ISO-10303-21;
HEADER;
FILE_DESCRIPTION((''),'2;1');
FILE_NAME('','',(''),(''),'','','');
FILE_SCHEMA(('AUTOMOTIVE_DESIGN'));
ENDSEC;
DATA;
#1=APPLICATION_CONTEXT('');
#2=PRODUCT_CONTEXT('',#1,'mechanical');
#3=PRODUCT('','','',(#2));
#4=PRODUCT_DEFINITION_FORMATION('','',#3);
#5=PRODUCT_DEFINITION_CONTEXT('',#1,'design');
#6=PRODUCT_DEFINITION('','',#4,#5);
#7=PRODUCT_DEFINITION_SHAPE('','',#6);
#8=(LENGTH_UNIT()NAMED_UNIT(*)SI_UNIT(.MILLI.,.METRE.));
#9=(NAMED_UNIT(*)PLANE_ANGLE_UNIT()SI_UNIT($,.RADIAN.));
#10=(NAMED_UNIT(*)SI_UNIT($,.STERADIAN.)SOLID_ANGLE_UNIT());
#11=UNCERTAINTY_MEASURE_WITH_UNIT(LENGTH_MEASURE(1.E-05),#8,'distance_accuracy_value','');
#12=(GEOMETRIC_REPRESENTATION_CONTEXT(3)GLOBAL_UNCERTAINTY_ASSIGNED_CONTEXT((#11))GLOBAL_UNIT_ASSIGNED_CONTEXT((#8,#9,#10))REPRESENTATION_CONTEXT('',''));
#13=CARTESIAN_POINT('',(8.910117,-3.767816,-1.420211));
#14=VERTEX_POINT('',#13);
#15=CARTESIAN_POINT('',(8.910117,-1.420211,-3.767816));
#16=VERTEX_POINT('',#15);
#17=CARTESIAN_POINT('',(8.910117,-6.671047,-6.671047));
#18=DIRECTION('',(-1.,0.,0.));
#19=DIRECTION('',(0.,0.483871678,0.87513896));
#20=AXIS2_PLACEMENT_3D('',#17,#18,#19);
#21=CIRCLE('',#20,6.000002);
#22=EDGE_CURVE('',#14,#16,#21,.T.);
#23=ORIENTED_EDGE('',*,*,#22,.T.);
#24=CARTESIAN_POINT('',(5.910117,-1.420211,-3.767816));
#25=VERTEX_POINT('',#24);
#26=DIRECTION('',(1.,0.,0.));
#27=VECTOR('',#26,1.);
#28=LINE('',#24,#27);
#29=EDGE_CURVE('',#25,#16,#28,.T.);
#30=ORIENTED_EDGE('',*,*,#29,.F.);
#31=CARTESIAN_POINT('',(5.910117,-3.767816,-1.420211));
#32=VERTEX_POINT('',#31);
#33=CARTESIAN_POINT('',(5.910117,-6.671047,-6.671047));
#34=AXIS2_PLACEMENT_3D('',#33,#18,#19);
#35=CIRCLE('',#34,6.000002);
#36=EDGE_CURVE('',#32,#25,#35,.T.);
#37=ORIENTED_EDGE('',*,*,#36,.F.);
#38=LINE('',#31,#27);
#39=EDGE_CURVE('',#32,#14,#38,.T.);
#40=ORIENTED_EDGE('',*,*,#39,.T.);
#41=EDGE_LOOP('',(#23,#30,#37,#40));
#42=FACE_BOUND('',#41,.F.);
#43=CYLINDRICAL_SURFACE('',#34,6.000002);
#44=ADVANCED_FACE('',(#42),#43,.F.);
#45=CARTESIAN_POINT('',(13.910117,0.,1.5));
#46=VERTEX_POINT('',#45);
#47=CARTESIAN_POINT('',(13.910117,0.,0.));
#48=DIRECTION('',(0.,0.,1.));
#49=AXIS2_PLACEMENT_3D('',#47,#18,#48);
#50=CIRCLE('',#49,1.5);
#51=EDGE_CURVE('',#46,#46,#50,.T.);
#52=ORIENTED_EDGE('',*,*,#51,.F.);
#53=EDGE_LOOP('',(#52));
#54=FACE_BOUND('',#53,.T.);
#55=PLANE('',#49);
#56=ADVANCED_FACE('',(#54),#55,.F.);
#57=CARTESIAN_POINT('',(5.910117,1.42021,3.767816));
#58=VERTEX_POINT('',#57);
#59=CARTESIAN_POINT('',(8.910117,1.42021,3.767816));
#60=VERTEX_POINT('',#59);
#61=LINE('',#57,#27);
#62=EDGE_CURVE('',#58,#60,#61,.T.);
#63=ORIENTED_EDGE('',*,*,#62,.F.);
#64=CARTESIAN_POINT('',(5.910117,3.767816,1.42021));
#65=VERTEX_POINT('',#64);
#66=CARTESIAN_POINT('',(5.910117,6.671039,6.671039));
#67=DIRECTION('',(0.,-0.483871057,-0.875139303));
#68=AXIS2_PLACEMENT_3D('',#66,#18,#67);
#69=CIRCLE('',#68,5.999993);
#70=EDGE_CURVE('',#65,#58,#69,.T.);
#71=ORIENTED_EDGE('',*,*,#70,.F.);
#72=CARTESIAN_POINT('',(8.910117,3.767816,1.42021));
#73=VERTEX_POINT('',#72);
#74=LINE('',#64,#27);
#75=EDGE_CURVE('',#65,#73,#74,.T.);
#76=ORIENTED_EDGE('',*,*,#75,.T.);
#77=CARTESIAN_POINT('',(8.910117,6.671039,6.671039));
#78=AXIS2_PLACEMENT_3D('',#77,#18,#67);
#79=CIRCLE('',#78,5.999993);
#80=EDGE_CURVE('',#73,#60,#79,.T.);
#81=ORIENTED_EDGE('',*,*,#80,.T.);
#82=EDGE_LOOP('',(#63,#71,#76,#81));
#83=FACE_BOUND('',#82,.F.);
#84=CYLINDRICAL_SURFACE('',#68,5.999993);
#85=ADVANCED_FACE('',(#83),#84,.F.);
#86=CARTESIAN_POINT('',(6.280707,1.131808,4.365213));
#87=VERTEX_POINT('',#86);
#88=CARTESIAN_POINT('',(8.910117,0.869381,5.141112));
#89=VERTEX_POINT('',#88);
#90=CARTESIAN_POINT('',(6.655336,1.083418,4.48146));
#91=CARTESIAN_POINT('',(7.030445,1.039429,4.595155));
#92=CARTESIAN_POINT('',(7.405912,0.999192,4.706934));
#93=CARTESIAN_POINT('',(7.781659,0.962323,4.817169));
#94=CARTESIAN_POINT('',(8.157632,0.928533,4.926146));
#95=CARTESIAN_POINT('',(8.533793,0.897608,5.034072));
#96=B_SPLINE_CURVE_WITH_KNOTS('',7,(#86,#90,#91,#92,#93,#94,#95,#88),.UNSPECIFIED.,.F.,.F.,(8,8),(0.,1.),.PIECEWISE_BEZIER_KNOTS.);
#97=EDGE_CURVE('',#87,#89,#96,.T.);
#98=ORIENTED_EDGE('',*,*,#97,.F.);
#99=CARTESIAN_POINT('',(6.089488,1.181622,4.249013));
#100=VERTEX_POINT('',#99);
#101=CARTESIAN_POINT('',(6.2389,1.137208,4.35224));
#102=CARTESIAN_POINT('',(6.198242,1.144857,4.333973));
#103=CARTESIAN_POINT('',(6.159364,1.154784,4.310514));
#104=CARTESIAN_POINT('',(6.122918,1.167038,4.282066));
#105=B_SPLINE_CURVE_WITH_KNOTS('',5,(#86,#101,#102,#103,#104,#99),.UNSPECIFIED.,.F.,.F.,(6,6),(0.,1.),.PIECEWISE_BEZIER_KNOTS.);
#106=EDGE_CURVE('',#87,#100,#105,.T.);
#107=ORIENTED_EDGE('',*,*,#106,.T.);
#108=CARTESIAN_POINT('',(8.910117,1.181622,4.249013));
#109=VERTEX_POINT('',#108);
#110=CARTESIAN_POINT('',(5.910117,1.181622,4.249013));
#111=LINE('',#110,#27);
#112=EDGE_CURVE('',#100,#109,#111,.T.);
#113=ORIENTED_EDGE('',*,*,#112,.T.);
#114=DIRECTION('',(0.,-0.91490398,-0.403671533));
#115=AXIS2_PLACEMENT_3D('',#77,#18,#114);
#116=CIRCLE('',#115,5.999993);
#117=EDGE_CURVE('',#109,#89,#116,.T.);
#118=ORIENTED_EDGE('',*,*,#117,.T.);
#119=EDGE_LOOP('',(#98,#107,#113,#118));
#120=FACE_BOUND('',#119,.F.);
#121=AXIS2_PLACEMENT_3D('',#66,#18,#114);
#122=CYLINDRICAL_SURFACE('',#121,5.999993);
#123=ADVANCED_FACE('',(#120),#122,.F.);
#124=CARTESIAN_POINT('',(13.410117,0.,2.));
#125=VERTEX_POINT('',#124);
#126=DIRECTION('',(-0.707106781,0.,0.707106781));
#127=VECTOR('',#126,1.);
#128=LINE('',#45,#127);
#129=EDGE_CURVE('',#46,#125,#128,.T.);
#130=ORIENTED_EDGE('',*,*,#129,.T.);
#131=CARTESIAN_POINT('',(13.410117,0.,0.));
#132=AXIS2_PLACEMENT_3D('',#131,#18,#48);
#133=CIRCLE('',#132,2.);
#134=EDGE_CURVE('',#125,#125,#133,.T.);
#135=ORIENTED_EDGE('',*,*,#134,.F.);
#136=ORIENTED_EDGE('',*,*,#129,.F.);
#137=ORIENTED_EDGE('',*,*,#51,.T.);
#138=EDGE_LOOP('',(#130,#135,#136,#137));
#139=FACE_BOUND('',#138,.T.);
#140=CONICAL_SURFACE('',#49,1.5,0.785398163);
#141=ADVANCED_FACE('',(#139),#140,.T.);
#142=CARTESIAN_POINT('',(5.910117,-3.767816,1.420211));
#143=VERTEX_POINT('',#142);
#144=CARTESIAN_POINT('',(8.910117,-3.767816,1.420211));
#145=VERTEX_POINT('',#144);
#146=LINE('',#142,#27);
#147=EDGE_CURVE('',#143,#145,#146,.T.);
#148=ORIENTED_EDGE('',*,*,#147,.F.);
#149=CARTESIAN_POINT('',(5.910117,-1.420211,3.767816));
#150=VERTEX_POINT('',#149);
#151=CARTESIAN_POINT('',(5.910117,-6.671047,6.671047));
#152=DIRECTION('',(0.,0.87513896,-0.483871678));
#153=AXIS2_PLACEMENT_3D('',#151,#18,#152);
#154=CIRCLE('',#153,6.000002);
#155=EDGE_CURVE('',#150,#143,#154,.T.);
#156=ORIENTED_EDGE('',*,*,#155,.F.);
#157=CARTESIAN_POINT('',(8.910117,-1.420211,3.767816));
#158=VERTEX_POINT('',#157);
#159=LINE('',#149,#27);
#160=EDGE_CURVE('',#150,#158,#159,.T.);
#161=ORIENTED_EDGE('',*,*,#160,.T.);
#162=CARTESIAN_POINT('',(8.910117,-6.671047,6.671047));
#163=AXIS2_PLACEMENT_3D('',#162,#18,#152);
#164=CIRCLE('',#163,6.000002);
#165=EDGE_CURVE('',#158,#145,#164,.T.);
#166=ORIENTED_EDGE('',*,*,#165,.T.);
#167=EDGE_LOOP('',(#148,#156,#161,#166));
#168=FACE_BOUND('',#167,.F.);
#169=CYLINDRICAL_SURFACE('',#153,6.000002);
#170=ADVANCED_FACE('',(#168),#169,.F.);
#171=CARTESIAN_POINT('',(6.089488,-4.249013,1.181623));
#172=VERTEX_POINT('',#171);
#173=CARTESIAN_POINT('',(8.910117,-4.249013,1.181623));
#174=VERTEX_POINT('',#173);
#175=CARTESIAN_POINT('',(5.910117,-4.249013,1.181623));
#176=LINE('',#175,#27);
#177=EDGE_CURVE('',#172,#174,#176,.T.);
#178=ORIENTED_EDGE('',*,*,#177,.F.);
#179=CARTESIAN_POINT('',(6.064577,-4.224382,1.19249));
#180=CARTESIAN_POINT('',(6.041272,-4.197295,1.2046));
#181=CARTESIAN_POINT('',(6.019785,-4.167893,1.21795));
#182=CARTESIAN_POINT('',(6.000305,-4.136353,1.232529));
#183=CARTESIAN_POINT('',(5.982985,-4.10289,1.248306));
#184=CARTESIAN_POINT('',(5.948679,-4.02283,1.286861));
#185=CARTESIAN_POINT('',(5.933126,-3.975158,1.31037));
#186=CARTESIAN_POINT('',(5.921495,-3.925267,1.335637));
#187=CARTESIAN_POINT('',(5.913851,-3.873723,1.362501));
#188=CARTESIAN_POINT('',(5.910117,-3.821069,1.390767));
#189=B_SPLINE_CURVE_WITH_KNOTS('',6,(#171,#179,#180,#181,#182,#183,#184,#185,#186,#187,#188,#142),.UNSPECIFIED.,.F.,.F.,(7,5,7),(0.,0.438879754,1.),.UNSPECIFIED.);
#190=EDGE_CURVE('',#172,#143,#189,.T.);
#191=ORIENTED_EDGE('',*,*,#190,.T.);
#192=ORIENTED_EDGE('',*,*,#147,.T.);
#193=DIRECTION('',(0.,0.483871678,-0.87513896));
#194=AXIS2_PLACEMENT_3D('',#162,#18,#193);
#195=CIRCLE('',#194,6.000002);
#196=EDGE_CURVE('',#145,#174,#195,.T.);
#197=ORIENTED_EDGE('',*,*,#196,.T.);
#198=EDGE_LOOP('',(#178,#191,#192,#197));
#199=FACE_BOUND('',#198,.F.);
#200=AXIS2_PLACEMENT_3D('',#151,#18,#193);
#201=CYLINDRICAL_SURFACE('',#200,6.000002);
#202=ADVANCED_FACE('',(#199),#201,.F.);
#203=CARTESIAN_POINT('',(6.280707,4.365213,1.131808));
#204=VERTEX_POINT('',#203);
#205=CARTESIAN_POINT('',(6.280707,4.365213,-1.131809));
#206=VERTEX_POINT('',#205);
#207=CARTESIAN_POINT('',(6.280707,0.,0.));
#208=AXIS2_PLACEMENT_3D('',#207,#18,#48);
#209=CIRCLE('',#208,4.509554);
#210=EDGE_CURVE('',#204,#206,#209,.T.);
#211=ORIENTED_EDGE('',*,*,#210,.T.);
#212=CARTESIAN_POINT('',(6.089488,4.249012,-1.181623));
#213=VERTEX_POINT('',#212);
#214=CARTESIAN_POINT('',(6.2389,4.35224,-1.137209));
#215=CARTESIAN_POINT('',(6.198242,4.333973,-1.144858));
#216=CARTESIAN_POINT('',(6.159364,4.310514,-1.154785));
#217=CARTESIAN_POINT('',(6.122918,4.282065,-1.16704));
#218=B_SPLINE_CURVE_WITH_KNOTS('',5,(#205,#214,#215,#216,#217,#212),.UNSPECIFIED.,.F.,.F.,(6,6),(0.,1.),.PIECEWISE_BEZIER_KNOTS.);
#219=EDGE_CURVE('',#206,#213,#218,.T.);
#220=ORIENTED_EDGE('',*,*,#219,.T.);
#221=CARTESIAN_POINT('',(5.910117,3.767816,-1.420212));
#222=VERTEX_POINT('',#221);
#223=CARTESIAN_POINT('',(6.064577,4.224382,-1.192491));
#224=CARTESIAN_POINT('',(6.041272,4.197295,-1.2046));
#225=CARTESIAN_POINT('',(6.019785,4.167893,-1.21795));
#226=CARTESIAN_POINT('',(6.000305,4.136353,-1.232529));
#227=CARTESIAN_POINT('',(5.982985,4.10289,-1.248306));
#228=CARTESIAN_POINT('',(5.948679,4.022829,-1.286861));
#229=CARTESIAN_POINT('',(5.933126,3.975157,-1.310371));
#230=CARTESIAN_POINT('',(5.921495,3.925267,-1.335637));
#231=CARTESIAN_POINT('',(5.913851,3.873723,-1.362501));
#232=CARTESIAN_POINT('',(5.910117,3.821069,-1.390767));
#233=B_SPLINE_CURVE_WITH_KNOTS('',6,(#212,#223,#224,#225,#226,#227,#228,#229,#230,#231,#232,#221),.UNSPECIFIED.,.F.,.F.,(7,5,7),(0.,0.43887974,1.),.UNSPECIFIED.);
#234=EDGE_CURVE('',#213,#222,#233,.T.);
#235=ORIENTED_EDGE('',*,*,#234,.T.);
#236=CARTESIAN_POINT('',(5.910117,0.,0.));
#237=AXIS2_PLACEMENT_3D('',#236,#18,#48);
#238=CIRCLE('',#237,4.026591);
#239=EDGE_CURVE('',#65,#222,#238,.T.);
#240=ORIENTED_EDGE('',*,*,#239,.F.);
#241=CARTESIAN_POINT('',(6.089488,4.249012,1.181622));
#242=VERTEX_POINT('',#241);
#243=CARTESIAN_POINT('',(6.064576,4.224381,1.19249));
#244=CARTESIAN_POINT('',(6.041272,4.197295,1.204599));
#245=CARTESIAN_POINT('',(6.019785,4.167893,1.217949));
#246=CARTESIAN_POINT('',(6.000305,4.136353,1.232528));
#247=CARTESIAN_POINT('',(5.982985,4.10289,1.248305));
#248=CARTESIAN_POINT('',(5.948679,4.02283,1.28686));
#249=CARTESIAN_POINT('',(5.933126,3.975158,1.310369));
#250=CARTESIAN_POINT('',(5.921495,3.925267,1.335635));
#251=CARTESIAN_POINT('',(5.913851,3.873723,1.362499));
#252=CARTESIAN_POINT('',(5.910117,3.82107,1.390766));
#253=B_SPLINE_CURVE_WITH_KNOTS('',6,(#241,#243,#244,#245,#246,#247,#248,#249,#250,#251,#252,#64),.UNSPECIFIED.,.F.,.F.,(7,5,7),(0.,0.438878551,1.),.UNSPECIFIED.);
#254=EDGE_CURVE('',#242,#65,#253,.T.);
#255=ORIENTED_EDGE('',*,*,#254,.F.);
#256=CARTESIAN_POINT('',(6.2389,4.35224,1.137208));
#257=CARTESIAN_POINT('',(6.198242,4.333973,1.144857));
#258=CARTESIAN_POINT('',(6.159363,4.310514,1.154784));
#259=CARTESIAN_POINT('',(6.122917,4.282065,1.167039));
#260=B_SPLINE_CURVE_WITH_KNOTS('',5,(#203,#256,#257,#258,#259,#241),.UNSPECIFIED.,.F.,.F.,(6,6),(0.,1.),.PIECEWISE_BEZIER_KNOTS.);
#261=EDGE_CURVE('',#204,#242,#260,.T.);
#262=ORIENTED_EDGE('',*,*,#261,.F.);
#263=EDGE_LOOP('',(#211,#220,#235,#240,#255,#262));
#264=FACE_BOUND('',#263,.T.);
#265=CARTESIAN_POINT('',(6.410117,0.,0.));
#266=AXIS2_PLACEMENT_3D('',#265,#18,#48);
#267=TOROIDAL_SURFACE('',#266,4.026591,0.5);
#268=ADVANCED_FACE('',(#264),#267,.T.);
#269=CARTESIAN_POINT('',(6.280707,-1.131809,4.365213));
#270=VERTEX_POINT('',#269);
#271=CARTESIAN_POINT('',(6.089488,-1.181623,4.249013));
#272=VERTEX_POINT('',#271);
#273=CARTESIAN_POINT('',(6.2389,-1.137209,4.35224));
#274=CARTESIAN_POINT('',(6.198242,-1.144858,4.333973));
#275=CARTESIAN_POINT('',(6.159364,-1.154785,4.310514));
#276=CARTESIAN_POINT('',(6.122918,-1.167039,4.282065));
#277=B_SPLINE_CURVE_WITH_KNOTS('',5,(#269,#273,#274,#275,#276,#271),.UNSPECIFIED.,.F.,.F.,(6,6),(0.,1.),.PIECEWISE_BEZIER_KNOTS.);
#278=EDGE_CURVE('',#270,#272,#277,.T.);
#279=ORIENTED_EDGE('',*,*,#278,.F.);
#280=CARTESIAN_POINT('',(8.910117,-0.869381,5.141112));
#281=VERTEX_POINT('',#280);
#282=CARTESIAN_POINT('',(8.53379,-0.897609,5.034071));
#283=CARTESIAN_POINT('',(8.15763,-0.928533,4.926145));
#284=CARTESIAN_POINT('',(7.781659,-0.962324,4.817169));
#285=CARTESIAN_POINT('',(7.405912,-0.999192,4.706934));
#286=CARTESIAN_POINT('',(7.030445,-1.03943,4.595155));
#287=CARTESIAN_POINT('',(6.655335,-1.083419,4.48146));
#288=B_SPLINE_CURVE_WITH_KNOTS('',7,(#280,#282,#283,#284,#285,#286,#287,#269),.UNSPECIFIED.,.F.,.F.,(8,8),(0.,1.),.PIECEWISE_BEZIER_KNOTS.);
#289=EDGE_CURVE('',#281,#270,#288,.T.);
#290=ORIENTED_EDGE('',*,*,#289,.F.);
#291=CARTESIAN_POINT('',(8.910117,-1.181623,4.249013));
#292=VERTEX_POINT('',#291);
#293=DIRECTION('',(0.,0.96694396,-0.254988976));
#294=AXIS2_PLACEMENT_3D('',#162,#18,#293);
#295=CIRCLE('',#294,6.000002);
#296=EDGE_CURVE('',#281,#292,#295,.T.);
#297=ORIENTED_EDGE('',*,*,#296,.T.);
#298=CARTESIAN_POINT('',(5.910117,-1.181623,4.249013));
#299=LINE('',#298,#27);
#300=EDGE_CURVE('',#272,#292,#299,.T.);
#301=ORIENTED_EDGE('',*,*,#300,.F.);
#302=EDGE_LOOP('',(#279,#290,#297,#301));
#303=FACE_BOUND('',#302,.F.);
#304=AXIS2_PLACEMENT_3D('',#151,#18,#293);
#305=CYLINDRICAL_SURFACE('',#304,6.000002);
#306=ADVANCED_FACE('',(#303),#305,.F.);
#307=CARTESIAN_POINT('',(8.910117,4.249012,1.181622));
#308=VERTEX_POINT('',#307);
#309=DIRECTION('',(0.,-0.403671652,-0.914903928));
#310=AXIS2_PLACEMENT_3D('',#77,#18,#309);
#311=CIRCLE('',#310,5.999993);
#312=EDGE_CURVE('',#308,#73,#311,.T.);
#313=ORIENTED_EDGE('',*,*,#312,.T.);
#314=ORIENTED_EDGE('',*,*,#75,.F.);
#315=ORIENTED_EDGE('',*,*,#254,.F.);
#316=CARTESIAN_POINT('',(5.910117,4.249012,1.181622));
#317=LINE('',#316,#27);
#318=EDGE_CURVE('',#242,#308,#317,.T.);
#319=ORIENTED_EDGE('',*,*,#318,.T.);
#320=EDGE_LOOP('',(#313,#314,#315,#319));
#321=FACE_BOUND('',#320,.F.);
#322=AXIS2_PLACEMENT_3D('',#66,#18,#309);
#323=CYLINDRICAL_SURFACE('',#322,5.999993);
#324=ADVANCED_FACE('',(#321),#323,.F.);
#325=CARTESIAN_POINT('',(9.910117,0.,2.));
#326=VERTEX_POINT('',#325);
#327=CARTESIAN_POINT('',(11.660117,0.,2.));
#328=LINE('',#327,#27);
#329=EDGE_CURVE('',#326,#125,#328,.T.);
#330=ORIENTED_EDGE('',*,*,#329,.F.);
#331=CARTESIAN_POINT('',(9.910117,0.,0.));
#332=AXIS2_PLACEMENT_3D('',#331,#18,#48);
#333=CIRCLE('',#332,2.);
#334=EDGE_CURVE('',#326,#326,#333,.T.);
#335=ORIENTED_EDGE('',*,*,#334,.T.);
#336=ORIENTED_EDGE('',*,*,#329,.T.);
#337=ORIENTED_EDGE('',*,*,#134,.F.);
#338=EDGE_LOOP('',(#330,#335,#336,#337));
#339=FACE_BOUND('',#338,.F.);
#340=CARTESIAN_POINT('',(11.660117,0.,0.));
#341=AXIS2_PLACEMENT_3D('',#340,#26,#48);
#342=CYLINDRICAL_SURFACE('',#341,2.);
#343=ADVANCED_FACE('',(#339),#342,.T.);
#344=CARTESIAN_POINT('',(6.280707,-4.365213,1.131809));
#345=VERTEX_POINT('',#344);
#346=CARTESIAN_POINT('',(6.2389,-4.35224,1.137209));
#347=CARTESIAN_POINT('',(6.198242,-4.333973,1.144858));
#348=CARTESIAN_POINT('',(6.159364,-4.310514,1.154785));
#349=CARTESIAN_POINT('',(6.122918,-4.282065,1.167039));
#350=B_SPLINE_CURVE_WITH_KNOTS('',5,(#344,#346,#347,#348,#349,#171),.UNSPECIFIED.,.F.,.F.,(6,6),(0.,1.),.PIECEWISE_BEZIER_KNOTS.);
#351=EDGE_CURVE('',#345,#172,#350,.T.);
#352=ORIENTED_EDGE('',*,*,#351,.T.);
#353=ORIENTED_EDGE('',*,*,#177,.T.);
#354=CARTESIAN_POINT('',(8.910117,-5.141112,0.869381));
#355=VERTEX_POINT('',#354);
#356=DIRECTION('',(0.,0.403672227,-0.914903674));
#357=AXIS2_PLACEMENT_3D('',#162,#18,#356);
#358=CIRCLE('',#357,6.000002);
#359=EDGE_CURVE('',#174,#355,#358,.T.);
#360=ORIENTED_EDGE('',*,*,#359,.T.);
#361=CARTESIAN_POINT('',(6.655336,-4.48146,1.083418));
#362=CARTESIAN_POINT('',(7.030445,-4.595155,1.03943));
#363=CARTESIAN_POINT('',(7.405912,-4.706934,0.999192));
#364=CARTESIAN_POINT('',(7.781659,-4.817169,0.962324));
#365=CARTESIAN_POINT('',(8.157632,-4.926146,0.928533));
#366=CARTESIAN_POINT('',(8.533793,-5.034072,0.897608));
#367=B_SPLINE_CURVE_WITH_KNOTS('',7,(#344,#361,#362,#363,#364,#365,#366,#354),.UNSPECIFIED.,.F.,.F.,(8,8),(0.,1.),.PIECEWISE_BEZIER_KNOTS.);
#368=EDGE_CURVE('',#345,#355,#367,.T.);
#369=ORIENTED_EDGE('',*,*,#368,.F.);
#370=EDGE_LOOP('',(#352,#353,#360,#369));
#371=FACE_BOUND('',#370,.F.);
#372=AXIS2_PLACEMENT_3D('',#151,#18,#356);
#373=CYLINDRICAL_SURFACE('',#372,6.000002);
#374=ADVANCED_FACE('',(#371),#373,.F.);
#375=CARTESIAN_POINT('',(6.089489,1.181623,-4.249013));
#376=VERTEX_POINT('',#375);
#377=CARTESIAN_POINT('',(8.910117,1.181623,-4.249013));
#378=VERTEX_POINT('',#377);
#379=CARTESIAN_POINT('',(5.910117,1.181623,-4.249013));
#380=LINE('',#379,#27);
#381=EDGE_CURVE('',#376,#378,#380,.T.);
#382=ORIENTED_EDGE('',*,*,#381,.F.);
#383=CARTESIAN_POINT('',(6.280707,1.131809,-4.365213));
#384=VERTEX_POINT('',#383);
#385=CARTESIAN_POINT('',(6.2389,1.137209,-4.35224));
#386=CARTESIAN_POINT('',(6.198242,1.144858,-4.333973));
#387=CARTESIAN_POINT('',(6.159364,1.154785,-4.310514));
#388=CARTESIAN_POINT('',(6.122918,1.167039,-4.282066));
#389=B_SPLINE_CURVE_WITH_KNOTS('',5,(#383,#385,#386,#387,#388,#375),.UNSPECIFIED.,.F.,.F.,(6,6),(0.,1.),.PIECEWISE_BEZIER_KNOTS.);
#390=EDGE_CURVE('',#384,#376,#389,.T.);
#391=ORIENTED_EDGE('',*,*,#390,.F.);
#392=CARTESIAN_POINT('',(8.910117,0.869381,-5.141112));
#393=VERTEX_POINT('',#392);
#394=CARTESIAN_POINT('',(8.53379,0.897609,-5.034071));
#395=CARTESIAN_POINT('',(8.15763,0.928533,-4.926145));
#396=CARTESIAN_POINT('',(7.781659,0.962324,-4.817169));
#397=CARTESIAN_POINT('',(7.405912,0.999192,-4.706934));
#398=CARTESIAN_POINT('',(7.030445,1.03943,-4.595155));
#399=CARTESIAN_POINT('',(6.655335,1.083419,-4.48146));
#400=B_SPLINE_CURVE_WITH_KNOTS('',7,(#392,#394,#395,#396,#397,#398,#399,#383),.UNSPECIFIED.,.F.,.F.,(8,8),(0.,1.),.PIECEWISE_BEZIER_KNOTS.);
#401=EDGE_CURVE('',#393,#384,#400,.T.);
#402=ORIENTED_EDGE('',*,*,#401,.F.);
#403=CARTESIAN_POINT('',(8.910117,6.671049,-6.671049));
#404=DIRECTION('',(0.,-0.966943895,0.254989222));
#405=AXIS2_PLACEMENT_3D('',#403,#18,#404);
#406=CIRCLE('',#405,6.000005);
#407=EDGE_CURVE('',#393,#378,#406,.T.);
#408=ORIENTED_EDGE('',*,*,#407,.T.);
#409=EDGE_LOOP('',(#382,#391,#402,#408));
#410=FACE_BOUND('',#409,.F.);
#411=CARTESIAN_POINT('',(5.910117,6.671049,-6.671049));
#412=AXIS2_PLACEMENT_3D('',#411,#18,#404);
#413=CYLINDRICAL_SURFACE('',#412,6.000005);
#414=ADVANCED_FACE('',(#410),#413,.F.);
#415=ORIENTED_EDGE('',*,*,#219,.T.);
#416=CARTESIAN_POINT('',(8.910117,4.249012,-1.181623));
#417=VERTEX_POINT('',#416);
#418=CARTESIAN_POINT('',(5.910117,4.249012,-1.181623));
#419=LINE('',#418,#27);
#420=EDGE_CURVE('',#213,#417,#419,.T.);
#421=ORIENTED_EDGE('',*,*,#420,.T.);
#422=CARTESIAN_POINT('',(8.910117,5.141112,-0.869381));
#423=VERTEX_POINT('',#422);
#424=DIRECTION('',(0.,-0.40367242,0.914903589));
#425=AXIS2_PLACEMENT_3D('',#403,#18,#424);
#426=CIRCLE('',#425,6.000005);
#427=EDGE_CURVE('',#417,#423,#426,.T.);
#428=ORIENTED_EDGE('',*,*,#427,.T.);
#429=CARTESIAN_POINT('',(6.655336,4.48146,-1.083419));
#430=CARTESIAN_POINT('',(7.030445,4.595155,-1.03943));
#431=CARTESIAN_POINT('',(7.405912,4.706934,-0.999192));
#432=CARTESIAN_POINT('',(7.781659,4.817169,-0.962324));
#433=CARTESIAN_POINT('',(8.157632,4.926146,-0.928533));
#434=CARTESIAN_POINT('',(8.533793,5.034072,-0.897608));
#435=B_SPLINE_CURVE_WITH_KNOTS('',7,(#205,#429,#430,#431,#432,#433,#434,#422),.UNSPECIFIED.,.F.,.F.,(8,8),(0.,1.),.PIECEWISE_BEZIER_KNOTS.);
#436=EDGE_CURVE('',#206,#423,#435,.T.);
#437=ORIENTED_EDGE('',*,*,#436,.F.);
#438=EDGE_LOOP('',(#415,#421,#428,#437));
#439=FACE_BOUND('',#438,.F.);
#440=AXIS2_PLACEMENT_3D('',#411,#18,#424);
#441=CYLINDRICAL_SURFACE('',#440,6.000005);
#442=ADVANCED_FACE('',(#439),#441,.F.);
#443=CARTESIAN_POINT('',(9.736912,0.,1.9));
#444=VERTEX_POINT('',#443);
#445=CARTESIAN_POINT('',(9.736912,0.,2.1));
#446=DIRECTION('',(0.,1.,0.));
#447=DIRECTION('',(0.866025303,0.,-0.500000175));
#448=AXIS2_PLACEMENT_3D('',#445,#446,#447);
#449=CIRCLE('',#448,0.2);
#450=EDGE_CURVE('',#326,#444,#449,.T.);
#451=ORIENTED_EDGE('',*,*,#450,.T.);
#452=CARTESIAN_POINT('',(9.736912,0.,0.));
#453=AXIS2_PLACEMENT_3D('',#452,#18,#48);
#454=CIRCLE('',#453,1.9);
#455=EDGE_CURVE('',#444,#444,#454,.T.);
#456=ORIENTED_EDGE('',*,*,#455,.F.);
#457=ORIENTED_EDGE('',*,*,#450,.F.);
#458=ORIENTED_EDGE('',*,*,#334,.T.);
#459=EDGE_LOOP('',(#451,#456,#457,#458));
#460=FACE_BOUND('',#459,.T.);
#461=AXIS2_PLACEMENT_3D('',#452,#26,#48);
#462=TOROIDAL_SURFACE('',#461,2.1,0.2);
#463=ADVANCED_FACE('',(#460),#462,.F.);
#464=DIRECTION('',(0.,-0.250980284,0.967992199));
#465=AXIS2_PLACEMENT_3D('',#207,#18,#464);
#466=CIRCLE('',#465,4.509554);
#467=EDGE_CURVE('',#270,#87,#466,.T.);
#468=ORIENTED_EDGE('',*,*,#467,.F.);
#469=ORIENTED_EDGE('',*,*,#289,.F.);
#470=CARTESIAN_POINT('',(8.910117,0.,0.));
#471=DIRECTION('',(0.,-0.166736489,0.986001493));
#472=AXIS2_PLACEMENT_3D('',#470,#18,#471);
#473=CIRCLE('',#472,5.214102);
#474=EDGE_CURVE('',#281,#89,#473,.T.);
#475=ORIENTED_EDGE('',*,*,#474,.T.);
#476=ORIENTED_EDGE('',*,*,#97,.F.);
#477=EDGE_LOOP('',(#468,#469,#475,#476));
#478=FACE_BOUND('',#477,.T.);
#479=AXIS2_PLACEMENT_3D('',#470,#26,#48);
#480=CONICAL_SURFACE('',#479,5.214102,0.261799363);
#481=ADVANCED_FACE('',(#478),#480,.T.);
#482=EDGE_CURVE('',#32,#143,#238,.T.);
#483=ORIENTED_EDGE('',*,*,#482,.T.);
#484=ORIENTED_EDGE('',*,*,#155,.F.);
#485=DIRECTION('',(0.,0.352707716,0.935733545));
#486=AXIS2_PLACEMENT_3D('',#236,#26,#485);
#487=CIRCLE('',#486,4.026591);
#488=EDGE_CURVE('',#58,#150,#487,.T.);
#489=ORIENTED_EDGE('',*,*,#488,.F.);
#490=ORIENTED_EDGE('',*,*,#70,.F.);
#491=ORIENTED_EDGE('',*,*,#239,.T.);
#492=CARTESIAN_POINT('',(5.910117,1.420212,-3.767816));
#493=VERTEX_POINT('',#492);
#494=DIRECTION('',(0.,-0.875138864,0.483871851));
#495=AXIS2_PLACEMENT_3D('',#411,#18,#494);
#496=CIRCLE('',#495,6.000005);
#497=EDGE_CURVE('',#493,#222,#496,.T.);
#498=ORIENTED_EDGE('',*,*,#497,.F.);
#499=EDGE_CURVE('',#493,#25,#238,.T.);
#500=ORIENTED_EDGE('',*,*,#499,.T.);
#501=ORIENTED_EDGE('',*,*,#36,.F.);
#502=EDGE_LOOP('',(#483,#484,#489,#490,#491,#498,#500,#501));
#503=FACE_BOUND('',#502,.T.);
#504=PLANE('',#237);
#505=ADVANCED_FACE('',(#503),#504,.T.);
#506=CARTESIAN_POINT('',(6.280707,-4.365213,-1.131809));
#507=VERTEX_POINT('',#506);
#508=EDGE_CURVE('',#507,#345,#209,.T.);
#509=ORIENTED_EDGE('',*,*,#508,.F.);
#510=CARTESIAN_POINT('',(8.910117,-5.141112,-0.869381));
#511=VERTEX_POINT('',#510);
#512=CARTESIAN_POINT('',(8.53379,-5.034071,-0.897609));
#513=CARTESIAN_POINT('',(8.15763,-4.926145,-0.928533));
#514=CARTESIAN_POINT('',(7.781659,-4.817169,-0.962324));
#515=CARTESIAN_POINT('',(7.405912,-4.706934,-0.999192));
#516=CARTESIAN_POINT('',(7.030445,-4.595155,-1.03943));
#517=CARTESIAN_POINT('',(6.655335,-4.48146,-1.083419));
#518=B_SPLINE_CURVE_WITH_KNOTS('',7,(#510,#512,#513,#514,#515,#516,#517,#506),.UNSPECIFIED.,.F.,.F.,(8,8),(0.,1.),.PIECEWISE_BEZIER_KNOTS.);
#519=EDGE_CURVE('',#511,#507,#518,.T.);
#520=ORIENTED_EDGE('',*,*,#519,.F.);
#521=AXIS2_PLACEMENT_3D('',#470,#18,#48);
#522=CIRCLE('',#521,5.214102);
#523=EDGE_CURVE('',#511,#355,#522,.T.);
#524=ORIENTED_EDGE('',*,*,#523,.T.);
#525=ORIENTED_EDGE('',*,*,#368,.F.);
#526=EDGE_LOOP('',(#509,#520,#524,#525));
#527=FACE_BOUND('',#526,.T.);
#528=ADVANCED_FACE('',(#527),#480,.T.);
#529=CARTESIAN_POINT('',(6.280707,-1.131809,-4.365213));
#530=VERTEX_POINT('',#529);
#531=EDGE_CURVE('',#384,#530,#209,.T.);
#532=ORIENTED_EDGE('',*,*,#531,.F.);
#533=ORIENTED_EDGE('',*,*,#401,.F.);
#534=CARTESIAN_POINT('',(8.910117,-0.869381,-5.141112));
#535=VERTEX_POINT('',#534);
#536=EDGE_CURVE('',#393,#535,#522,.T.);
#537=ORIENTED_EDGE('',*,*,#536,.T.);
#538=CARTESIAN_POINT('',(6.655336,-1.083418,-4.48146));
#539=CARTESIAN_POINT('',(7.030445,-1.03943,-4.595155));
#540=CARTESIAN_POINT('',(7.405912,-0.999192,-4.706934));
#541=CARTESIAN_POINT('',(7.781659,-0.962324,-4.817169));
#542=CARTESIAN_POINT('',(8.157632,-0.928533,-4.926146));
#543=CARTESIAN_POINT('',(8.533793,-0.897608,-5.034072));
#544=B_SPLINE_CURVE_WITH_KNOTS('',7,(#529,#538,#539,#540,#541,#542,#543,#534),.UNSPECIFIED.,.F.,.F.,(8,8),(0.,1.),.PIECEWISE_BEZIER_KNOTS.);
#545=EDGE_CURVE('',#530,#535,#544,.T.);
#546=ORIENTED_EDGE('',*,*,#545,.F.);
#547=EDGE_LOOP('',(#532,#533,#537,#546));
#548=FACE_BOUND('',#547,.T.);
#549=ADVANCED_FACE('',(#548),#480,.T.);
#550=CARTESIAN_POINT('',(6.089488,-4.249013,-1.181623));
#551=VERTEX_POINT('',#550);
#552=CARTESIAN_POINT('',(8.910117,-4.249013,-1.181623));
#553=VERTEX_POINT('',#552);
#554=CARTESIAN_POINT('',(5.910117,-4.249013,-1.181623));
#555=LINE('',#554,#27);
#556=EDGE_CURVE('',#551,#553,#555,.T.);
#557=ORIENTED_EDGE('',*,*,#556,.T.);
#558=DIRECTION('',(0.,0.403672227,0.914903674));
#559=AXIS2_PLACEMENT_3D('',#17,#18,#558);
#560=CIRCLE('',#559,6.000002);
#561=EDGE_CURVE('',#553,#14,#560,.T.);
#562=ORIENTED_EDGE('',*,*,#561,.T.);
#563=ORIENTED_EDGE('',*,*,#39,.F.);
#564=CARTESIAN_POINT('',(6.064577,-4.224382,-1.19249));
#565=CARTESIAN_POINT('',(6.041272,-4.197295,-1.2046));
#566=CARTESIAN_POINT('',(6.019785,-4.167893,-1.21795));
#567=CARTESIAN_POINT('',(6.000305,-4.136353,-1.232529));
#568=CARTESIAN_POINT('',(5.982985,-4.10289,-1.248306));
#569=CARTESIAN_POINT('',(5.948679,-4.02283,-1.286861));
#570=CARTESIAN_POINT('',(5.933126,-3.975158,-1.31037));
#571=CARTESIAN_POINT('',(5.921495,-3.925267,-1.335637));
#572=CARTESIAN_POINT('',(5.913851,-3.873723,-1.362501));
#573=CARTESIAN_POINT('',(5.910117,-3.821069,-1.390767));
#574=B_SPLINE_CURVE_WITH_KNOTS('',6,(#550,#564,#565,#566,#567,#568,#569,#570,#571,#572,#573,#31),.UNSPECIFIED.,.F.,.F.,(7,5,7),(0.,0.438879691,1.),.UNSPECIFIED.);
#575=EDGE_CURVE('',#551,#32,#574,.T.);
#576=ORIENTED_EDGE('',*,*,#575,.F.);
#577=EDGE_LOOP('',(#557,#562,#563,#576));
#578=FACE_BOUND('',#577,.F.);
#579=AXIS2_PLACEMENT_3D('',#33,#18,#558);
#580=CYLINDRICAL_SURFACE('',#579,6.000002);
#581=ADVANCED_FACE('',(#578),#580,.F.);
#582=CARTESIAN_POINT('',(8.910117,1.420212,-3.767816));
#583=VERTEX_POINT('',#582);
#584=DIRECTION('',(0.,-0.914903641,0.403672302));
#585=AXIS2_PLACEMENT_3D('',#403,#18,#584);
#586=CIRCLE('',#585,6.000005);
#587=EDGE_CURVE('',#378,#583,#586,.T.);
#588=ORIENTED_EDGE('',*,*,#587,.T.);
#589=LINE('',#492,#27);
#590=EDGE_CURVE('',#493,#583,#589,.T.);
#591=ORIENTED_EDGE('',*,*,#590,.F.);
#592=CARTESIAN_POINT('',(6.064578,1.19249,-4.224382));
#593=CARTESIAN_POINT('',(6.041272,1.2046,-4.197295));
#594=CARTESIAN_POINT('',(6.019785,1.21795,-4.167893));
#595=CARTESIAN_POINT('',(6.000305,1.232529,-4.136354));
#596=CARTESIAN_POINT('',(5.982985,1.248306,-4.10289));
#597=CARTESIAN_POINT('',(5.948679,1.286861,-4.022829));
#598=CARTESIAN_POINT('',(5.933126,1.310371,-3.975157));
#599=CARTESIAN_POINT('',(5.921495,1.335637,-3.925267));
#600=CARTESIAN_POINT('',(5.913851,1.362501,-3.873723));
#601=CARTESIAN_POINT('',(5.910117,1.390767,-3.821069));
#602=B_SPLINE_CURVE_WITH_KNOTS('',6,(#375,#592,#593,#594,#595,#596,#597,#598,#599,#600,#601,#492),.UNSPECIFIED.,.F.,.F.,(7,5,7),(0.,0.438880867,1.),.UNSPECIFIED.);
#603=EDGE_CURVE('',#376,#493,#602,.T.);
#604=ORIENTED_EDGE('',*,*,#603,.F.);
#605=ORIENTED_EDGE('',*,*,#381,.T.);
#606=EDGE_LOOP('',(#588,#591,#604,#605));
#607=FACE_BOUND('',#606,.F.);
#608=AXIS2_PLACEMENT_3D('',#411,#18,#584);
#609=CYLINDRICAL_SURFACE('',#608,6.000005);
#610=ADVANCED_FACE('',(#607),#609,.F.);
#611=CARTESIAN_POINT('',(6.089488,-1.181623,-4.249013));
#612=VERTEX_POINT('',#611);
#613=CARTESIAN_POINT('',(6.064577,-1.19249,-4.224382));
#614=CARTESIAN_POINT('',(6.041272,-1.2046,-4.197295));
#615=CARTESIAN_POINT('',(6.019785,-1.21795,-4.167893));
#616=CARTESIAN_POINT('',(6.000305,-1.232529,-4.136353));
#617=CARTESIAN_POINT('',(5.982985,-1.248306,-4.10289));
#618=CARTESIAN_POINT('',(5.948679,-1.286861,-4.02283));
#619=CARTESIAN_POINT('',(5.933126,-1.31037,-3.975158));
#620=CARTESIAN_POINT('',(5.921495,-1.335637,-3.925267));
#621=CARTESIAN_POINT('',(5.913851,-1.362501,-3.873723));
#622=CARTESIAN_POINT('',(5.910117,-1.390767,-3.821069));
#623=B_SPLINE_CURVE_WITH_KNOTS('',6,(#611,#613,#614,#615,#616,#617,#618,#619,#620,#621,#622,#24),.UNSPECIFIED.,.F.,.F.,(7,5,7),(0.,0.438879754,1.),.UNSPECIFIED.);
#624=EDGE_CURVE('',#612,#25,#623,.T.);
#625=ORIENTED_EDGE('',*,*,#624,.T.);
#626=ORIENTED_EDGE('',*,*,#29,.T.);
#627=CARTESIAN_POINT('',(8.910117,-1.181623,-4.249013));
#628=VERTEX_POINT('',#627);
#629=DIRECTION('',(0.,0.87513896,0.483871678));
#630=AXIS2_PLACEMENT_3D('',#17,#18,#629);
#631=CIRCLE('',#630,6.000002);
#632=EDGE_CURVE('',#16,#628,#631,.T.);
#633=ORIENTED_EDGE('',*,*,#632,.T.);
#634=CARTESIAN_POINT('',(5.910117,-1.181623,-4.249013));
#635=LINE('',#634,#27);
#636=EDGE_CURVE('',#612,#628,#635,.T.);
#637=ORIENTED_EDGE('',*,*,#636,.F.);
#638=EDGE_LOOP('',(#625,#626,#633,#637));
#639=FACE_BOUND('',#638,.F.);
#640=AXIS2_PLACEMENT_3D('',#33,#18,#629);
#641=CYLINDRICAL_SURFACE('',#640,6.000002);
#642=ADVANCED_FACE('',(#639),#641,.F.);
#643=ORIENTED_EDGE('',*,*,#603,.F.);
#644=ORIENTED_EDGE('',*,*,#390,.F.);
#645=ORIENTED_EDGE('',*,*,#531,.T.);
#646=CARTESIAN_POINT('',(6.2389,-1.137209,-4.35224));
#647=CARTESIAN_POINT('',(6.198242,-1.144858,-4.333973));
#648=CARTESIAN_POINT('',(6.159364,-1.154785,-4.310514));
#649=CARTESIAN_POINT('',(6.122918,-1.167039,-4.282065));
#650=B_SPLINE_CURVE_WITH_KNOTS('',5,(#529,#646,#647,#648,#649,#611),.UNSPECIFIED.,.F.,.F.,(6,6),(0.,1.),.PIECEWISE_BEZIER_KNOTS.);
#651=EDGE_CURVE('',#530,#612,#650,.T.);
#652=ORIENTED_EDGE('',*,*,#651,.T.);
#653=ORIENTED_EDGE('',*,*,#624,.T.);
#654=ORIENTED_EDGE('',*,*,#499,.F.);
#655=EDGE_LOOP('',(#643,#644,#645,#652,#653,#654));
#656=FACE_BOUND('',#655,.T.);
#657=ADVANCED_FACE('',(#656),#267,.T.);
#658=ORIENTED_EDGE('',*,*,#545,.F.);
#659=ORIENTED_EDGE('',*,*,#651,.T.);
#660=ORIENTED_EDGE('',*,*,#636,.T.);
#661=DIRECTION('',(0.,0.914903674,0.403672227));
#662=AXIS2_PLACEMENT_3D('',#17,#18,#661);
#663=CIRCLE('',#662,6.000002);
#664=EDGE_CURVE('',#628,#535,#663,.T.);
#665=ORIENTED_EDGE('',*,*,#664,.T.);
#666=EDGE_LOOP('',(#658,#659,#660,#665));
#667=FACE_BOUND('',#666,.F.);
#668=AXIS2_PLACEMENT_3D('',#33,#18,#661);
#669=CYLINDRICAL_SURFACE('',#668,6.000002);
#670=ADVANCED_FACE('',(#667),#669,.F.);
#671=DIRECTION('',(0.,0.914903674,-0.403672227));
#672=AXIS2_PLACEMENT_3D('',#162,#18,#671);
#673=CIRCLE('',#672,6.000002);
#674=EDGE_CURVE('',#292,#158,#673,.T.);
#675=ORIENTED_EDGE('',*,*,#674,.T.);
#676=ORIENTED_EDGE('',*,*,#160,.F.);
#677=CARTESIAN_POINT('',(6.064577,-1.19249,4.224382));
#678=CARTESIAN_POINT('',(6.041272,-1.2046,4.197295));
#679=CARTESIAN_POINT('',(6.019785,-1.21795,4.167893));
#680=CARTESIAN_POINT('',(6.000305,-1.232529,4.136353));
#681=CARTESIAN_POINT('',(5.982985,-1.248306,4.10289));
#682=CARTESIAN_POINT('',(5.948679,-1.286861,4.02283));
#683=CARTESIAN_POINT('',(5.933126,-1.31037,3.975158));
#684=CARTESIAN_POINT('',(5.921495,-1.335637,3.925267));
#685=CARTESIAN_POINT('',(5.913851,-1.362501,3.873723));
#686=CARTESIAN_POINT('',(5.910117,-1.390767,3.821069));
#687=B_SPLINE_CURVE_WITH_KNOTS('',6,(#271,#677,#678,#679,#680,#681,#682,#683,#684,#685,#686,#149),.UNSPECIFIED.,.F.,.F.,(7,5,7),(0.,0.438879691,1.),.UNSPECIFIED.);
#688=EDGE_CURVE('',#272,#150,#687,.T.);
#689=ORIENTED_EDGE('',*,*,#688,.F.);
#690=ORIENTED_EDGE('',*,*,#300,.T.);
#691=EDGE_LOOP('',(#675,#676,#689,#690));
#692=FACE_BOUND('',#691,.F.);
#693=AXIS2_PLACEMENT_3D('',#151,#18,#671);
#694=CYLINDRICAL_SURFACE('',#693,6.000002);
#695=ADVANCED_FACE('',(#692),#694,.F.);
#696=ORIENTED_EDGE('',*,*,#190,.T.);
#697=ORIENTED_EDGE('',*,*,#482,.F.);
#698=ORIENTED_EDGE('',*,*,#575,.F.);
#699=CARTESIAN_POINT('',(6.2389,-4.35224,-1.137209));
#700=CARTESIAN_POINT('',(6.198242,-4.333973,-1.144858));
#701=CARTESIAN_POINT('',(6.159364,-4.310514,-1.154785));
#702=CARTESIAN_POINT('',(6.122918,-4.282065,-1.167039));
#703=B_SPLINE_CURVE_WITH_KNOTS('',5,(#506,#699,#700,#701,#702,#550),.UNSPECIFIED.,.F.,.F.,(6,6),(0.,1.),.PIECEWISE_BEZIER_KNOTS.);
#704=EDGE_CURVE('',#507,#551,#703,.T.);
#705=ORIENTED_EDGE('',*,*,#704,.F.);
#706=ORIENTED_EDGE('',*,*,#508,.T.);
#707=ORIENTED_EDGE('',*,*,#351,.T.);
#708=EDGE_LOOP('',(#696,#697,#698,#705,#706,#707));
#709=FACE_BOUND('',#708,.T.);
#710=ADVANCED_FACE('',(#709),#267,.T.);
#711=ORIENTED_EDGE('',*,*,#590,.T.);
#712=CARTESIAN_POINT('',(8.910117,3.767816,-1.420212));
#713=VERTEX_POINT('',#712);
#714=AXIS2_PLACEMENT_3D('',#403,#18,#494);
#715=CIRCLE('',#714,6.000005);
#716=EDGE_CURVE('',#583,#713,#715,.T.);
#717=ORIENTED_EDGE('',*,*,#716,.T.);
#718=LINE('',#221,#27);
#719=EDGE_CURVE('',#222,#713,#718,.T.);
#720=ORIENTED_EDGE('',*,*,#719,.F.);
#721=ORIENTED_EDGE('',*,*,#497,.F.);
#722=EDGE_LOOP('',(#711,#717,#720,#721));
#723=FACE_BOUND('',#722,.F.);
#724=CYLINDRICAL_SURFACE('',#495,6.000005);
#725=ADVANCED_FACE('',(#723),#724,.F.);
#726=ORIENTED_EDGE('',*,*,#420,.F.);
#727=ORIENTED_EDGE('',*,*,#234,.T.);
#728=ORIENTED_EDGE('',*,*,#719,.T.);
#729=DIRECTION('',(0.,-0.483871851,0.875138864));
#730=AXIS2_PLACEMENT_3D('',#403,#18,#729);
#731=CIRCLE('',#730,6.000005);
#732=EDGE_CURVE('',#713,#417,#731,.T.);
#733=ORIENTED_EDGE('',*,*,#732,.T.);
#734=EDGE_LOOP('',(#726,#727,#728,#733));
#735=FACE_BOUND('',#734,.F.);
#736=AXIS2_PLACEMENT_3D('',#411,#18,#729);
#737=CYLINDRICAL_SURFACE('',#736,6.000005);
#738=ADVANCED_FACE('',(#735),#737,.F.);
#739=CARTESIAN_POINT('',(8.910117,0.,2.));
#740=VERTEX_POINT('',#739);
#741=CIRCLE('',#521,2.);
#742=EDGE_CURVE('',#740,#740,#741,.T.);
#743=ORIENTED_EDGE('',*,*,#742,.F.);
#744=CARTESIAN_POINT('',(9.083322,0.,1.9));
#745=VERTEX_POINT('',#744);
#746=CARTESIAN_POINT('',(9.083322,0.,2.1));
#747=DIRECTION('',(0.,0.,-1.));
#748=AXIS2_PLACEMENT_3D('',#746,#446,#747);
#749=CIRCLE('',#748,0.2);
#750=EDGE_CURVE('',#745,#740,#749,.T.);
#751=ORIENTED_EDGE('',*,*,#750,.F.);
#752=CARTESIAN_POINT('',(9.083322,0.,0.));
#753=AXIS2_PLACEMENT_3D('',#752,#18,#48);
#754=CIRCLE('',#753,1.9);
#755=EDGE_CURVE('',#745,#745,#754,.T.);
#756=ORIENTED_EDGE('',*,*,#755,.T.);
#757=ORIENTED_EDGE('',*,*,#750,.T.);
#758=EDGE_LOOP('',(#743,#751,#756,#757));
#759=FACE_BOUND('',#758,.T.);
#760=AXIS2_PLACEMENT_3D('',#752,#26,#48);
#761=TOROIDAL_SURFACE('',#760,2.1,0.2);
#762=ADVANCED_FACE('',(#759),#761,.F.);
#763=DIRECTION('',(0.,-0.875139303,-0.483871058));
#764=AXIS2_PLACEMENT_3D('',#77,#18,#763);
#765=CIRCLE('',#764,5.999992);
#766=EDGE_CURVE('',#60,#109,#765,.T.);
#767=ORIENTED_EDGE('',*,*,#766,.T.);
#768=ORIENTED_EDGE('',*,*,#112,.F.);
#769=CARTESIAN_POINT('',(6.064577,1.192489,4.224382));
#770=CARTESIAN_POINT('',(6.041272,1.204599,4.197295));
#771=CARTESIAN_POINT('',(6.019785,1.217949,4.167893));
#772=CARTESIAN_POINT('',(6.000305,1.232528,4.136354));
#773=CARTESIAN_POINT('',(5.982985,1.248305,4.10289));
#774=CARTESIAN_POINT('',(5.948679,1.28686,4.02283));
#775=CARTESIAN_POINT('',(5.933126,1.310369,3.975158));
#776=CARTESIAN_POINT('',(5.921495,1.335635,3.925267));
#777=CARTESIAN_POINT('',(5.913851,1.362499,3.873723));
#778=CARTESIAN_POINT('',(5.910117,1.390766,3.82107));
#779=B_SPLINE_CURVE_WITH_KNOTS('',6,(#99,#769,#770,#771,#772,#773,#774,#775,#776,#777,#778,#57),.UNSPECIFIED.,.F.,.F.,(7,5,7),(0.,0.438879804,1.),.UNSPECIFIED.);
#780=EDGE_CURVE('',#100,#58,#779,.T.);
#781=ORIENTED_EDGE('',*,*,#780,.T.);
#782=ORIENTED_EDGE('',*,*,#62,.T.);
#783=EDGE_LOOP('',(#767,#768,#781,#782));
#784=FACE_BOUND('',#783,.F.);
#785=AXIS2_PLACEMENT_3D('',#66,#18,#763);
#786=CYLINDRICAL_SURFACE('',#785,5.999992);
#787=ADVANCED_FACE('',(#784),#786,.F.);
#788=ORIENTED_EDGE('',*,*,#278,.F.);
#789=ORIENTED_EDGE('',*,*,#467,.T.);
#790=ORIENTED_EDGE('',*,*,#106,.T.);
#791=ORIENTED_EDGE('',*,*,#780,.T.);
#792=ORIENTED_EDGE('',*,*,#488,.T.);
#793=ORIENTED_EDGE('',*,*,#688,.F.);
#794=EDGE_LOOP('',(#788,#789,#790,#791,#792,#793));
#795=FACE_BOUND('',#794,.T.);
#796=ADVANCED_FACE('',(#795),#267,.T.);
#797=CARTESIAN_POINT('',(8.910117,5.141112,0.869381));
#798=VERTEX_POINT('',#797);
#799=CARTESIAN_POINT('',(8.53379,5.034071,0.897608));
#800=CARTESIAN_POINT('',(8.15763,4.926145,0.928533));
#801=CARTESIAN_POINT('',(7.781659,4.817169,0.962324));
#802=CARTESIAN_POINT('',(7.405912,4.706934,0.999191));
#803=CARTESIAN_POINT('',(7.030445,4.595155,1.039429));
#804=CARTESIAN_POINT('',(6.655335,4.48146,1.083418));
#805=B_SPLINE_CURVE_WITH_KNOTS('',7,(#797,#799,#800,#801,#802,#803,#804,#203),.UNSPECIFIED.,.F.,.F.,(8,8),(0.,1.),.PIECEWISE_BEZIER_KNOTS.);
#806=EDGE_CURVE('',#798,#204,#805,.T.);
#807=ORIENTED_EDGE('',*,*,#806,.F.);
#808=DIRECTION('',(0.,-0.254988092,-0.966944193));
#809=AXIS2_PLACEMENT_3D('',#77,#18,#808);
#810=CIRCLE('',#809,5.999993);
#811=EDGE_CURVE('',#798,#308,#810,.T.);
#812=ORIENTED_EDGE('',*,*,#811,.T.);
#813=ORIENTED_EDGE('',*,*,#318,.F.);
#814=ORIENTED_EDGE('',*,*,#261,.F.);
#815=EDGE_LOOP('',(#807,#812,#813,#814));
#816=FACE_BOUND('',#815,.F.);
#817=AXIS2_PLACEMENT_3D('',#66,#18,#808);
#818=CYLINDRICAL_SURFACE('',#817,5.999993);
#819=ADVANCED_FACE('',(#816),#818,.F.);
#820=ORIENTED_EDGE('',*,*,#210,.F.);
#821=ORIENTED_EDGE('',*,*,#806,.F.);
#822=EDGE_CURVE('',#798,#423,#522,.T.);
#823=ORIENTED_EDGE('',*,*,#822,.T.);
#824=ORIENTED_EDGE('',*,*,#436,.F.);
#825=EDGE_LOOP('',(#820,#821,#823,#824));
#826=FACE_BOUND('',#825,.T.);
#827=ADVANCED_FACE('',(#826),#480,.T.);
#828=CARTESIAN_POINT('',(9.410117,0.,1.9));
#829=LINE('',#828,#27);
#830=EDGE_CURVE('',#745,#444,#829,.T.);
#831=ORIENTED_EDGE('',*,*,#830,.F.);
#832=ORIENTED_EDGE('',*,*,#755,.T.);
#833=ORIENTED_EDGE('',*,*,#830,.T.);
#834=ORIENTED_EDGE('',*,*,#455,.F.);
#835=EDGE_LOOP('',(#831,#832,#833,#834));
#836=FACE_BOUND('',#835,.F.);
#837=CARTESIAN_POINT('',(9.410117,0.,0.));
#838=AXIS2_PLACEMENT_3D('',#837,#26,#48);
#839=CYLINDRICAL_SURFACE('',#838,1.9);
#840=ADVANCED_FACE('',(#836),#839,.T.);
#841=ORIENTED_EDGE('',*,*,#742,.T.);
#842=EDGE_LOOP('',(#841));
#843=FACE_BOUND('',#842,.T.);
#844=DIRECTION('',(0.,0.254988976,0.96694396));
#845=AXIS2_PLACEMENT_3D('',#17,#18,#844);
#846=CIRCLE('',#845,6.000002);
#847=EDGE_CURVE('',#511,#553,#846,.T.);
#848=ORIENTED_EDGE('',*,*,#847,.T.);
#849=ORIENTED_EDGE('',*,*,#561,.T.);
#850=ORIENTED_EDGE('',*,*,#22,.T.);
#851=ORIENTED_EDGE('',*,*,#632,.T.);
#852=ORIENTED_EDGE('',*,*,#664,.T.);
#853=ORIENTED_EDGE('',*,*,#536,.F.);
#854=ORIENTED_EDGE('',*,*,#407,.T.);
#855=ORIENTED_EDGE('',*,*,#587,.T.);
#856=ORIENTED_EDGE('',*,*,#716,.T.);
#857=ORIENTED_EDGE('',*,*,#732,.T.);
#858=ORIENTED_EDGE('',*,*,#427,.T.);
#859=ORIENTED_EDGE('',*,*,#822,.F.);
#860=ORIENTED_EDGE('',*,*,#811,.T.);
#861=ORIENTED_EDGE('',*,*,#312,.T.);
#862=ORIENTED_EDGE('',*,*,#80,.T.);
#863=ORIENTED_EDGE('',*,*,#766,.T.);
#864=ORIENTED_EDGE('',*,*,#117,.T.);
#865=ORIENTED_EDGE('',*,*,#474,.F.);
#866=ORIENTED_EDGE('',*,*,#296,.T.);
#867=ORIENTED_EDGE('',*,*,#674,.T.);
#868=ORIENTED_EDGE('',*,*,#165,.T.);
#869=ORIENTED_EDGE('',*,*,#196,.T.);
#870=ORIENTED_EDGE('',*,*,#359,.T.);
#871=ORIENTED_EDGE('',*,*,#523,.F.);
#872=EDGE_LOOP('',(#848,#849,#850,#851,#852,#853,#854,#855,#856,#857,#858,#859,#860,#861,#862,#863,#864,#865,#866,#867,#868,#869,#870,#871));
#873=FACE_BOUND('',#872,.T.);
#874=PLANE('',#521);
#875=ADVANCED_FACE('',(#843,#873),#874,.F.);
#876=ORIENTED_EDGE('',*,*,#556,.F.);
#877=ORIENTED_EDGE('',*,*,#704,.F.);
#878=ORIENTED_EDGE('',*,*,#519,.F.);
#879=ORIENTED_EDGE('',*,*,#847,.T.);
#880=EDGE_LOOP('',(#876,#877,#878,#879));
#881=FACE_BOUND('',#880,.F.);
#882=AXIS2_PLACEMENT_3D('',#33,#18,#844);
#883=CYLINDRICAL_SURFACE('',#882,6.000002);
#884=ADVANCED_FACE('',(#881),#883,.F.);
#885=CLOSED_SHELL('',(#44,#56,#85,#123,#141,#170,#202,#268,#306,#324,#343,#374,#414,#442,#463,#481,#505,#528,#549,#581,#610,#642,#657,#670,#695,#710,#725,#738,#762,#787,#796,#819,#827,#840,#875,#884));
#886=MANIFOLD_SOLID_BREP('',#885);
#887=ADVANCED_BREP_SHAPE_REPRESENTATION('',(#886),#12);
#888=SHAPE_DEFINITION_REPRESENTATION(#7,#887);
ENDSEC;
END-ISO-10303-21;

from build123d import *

# Parameters (mm, degrees)
F0_W     = 3.5
F0_H     = 2
F0_W_2   = 0.65359
F0_H_2   = 1.9
F3_DEPTH = 25


# Not quite as in the source:
# - ends of sketch curves that miss each other by under 0.0002 mm in the source are joined


with BuildPart() as f1:
    # F0 (on Front) → F1 (revolve)
    with BuildSketch(Plane.XZ):
        with BuildLine():
            ThreePointArc((6.2807068037, 4.5095537326), (6.0134401175, 4.3309714378), (5.910117, 4.026591))
            Line((5.910117, 4.026591), (5.910117, 0))
            Line((5.910117, 0), (8.910117, 0))
            Line((8.910117, 0), (8.910117, 1.999999965))
            Line((8.910117, 1.999999965), (8.910117, 5.214102))
            Line((8.910117, 5.214102), (6.2807068037, 4.5095537326))
        make_face()
        with BuildLine():
            Line((9.736912, 1.9), (9.736912, 0))
            Line((9.736912, 0), (9.910117, 0))
            Line((9.910117, 0), (9.910117, 2))
            ThreePointArc((9.9101170606, 1.999999965), (9.8369119825, 1.9267949091), (9.736912, 1.9))
        make_face()
        with Locations((11.660117, 1)):
            Rectangle(F0_W, F0_H)
        with Locations((9.410117, 0.95)):
            Rectangle(F0_W_2, F0_H_2)
        with BuildLine():
            Line((8.910117, 1.999999965), (8.910117, 0))
            Line((8.910117, 0), (9.083322, 0))
            Line((9.083322, 0), (9.083322, 1.9))
            ThreePointArc((9.083322, 1.9), (8.9833220175, 1.9267949091), (8.9101169394, 1.999999965))
        make_face()
        Polygon((13.410117, 2), (13.410117, 0), (13.910117, 0), (13.910117, 1.5), align=None)
    revolve(axis=Axis((10.414001145, 0, 0), (-1, 0, 0)))

    # F2 (on face) → F3 (cut)
    with BuildSketch(Plane(origin=(5.910117, 0, 0), x_dir=(0, -1, 0), z_dir=(-1, 0, 0))):
        with BuildLine():
            ThreePointArc((1.1816228772, -4.2490125583), (1.0079083628, -4.6889045584), (0.8693810599, -5.1411123543))
            ThreePointArc((0.8693810599, -5.1411123543), (3.686926882, -3.686926882), (5.1411123543, -0.8693810599))
            ThreePointArc((5.1411123543, -0.8693810599), (4.6889045584, -1.0079083628), (4.2490125583, -1.1816228772))
            ThreePointArc((4.2490125583, -1.1816228772), (4.0057430921, -1.2955299839), (3.7678156951, -1.420211241))
            ThreePointArc((3.7678156951, -1.420211241), (2.8472298012, -2.8472298012), (1.420211241, -3.7678156951))
            ThreePointArc((1.420211241, -3.7678156951), (1.2955299839, -4.0057430921), (1.1816228772, -4.2490125583))
        make_face()
        with BuildLine():
            ThreePointArc((-5.1411123543, -0.8693810599), (-3.686926882, -3.686926882), (-0.8693810599, -5.1411123543))
            ThreePointArc((-0.8693810599, -5.1411123543), (-1.0079083664, -4.6889048876), (-1.1816228201, -4.2490132008))
            ThreePointArc((-1.1816228201, -4.2490132008), (-1.2955301515, -4.0057433246), (-1.4202116652, -3.7678155352))
            ThreePointArc((-1.4202116652, -3.7678155352), (-2.8472298012, -2.8472298012), (-3.7678155352, -1.4202116652))
            ThreePointArc((-3.7678155352, -1.4202116652), (-4.0057429748, -1.2955303249), (-4.2490124865, -1.1816231353))
            ThreePointArc((-4.2490124865, -1.1816231353), (-4.6889045191, -1.0079084953), (-5.1411123543, -0.8693810599))
        make_face()
        with BuildLine():
            ThreePointArc((4.2490125583, 1.1816228772), (4.6889045584, 1.0079083628), (5.1411123543, 0.8693810599))
            ThreePointArc((5.1411123543, 0.8693810599), (3.686926882, 3.686926882), (0.8693810599, 5.1411123543))
            ThreePointArc((0.8693810599, 5.1411123543), (1.0079083628, 4.6889045584), (1.1816228772, 4.2490125583))
            ThreePointArc((1.1816228772, 4.2490125583), (1.2955299839, 4.0057430921), (1.420211241, 3.7678156951))
            ThreePointArc((1.420211241, 3.7678156951), (2.8472298012, 2.8472298012), (3.7678156951, 1.420211241))
            ThreePointArc((3.7678156951, 1.420211241), (4.0057430921, 1.2955299839), (4.2490125583, 1.1816228772))
        make_face()
        with BuildLine():
            ThreePointArc((3.7678156951, -1.420211241), (2.4284046412, -2.4284046412), (1.420211241, -3.7678156951))
            ThreePointArc((1.420211241, -3.7678156951), (2.8472298012, -2.8472298012), (3.7678156951, -1.420211241))
        make_face()
        with BuildLine():
            ThreePointArc((-0.8693810599, 5.1411123543), (-3.686926882, 3.686926882), (-5.1411123543, 0.8693810599))
            ThreePointArc((-5.1411123543, 0.8693810599), (-4.6889043312, 1.0079080153), (-4.2490121021, 1.1816222641))
            ThreePointArc((-4.2490121021, 1.1816222641), (-4.0057431642, 1.295528931), (-3.7678162701, 1.4202097156))
            ThreePointArc((-3.7678162701, 1.4202097156), (-2.8472298012, 2.8472298012), (-1.4202097156, 3.7678162701))
            ThreePointArc((-1.4202097156, 3.7678162701), (-1.2955287576, 4.0057435139), (-1.181621949, 4.2490128164))
            ThreePointArc((-1.181621949, 4.2490128164), (-1.0079078864, 4.6889046997), (-0.8693810599, 5.1411123543))
        make_face()
        with BuildLine():
            ThreePointArc((-3.7678155352, -1.4202116652), (-2.8472298012, -2.8472298012), (-1.4202116652, -3.7678155352))
            ThreePointArc((-1.4202116652, -3.7678155352), (-2.4284049327, -2.4284049327), (-3.7678155352, -1.4202116652))
        make_face()
        with BuildLine():
            ThreePointArc((1.420211241, 3.7678156951), (2.4284046412, 2.4284046412), (3.7678156951, 1.420211241))
            ThreePointArc((3.7678156951, 1.420211241), (2.8472298012, 2.8472298012), (1.420211241, 3.7678156951))
        make_face()
        with BuildLine():
            ThreePointArc((-1.4202097156, 3.7678162701), (-2.8472298012, 2.8472298012), (-3.7678162701, 1.4202097156))
            ThreePointArc((-3.7678162701, 1.4202097156), (-2.428403593, 2.428403593), (-1.4202097156, 3.7678162701))
        make_face()
    extrude(amount=-F3_DEPTH, mode=Mode.SUBTRACT)


solid = f1.part
